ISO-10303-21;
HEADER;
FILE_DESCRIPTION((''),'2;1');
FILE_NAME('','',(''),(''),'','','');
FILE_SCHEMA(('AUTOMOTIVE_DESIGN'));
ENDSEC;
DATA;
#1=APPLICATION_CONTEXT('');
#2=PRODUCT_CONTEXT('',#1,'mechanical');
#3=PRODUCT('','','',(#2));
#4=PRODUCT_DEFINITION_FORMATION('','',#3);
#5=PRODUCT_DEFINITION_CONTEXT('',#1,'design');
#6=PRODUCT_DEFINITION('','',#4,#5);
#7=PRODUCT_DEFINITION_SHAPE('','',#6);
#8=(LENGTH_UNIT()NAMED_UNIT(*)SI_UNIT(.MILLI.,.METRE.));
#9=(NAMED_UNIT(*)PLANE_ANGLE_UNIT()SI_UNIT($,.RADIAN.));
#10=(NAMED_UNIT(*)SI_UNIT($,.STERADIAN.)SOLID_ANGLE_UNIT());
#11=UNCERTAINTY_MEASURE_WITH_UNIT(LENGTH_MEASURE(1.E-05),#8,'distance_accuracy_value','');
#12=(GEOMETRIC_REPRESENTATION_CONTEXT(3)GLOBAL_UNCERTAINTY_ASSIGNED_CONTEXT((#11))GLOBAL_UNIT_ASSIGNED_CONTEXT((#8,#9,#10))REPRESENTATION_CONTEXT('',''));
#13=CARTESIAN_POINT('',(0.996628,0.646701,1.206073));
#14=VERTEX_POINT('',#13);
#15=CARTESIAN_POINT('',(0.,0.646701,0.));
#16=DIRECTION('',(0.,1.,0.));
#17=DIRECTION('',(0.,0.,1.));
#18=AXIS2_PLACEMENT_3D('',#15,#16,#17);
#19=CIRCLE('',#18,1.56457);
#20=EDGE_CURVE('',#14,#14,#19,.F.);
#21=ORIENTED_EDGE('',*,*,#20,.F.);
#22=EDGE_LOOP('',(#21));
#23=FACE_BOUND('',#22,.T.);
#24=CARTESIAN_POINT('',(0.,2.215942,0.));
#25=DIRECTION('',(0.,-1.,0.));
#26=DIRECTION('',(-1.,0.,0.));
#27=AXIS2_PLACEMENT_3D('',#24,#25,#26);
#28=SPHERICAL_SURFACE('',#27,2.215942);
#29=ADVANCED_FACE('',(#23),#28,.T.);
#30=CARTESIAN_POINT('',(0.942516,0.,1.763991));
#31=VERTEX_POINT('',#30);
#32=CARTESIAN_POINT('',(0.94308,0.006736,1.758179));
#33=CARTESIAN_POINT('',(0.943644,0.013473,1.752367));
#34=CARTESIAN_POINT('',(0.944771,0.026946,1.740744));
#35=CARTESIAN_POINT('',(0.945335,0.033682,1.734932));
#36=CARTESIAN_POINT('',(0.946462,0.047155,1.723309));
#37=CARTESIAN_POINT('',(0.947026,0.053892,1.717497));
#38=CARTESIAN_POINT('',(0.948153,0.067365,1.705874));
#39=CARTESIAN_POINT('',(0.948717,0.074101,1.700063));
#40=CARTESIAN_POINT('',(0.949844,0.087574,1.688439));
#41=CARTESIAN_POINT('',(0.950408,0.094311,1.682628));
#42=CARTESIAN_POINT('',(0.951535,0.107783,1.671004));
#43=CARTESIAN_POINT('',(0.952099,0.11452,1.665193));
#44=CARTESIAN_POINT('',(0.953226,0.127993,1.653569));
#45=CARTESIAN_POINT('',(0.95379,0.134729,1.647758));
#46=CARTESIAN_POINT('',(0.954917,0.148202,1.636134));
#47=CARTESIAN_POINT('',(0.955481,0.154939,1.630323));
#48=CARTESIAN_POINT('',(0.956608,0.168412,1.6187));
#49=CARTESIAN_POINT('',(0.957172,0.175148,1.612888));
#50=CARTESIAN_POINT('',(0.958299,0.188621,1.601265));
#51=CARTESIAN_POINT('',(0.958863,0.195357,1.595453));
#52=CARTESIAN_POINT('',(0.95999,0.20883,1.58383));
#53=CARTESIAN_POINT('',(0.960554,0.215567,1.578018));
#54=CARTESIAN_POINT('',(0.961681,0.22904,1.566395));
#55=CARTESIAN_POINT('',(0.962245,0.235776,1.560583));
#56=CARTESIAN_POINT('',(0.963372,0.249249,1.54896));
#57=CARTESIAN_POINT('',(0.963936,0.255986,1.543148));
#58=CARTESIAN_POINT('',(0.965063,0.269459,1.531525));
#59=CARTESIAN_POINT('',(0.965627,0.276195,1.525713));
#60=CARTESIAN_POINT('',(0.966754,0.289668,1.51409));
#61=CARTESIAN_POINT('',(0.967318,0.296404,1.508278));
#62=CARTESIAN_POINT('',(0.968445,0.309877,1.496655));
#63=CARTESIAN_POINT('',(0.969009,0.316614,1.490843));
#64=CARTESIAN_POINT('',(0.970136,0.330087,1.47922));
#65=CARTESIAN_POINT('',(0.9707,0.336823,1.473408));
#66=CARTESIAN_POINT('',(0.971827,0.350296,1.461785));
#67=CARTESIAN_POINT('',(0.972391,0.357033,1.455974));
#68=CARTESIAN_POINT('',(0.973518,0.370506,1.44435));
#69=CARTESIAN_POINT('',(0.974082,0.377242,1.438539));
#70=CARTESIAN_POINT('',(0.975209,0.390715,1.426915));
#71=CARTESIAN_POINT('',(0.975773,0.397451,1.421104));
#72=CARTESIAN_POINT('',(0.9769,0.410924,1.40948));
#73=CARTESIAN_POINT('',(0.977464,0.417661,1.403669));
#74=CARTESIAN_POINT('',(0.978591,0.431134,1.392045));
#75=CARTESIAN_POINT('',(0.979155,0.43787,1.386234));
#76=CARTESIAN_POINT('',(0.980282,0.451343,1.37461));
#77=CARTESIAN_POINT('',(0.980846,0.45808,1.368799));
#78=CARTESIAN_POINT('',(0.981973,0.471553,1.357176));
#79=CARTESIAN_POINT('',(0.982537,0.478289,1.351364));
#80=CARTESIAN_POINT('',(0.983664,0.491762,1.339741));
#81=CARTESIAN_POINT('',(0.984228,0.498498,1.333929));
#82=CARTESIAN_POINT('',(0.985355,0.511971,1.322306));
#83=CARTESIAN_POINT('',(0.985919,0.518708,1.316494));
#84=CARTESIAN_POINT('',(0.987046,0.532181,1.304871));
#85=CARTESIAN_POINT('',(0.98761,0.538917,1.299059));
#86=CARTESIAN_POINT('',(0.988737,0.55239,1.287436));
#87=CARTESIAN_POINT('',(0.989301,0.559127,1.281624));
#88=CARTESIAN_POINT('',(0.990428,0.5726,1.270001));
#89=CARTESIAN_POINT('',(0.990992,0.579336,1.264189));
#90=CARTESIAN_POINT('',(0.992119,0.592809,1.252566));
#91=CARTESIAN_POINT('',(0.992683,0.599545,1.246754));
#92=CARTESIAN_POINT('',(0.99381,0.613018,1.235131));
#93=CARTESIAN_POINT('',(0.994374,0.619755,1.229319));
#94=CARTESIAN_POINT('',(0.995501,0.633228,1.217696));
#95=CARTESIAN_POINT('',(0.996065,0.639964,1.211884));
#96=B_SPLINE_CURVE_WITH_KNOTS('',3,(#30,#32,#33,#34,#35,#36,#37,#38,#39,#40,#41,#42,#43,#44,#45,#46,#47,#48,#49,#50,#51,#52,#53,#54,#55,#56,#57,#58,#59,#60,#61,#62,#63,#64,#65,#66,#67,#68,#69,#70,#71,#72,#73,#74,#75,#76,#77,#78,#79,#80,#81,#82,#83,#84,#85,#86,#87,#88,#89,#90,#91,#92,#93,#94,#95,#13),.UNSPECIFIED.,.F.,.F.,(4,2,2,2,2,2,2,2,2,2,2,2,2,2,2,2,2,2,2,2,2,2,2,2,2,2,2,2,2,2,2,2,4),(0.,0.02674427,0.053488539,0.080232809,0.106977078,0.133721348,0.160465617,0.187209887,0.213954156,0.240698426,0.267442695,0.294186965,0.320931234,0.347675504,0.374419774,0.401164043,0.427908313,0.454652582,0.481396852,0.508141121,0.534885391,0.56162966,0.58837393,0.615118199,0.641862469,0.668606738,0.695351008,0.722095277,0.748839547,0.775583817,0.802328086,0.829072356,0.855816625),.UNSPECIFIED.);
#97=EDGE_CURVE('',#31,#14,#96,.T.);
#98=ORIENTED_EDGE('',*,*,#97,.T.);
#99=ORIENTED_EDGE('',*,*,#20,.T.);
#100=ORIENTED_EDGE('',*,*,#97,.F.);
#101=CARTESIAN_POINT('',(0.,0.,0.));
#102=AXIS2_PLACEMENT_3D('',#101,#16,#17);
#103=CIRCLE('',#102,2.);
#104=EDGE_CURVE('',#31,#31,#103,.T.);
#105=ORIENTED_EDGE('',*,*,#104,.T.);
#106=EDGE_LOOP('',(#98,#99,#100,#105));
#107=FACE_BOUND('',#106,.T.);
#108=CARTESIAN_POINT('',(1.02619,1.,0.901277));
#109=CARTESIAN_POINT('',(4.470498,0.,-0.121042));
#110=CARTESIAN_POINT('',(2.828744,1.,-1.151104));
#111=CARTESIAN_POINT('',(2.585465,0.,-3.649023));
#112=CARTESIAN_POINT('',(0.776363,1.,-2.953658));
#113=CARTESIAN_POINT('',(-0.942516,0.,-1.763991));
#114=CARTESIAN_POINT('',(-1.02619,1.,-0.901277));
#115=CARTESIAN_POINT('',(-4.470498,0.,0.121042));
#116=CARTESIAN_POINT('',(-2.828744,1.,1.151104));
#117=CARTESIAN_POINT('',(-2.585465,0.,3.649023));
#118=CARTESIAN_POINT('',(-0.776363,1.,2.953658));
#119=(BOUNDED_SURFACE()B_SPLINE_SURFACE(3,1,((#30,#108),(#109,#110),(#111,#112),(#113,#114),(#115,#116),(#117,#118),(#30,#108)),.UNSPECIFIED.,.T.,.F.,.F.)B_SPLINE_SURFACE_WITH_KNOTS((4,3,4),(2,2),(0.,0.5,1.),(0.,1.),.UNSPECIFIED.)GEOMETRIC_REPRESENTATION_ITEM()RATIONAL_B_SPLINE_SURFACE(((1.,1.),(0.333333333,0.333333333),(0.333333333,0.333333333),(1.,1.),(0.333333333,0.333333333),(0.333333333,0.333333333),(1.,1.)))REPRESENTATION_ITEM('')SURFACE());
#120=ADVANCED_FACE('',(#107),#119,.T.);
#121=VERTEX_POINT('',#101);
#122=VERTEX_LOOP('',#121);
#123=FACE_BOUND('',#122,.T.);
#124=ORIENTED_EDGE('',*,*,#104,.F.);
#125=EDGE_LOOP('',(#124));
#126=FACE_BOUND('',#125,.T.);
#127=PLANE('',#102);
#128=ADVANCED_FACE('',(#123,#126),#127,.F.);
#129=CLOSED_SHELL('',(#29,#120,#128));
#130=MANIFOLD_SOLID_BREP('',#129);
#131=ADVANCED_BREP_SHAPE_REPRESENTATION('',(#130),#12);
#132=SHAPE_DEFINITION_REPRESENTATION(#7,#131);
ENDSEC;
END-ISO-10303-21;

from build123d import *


with BuildPart() as part:
    # 로프트1: read off the stored shape, not the designer's step
    # 로프트1: loft between two sections, ruled curve by curve
    loft_1_from = [
        Edge.make_bspline([(0.942516398, 0, 1.763990601), (4.470497599, 0, -0.121042196), (2.585464803, 0, -3.649023397), (-0.942516398, 0, -1.763990601), (-4.470497599, 0, 0.121042196), (-2.585464803, 0, 3.649023397), (0.942516398, 0, 1.763990601)], [0, 0, 0, 0, 0.5, 0.5, 0.5, 1, 1, 1, 1], 3, [1, 0.333333333, 0.333333333, 1, 0.333333333, 0.333333333, 1]),
    ]
    loft_1_to = [
        Edge.make_bspline([(1.026190487, 1, 0.901276533), (2.828743553, 1, -1.151104441), (0.776362579, 1, -2.953657507), (-1.026190487, 1, -0.901276533), (-2.828743553, 1, 1.151104441), (-0.776362579, 1, 2.953657507), (1.026190487, 1, 0.901276533)], [0, 0, 0, 0, 0.5, 0.5, 0.5, 1, 1, 1, 1], 3, [1, 0.333333333, 0.333333333, 1, 0.333333333, 0.333333333, 1]),
    ]
    loft_1 = Solid(Shell([*[Face.make_surface_from_curves(loft_1_from[k], loft_1_to[k]) for k in range(1)], Face(Wire(loft_1_from)), Face(Wire(loft_1_to))]))
    add(loft_1)

    # 스케치2 → 회전2 (revolve)
    with BuildSketch(Plane.XY):
        with BuildLine():
            Line((0, 0), (0, 4.43188316))
            ThreePointArc((0, 4.43188316), (-2.21594158, 2.21594158), (0, 0))
        make_face()
    revolve(axis=Axis((0, 0, 0), (0, 1, 0)))


solid = part.part
